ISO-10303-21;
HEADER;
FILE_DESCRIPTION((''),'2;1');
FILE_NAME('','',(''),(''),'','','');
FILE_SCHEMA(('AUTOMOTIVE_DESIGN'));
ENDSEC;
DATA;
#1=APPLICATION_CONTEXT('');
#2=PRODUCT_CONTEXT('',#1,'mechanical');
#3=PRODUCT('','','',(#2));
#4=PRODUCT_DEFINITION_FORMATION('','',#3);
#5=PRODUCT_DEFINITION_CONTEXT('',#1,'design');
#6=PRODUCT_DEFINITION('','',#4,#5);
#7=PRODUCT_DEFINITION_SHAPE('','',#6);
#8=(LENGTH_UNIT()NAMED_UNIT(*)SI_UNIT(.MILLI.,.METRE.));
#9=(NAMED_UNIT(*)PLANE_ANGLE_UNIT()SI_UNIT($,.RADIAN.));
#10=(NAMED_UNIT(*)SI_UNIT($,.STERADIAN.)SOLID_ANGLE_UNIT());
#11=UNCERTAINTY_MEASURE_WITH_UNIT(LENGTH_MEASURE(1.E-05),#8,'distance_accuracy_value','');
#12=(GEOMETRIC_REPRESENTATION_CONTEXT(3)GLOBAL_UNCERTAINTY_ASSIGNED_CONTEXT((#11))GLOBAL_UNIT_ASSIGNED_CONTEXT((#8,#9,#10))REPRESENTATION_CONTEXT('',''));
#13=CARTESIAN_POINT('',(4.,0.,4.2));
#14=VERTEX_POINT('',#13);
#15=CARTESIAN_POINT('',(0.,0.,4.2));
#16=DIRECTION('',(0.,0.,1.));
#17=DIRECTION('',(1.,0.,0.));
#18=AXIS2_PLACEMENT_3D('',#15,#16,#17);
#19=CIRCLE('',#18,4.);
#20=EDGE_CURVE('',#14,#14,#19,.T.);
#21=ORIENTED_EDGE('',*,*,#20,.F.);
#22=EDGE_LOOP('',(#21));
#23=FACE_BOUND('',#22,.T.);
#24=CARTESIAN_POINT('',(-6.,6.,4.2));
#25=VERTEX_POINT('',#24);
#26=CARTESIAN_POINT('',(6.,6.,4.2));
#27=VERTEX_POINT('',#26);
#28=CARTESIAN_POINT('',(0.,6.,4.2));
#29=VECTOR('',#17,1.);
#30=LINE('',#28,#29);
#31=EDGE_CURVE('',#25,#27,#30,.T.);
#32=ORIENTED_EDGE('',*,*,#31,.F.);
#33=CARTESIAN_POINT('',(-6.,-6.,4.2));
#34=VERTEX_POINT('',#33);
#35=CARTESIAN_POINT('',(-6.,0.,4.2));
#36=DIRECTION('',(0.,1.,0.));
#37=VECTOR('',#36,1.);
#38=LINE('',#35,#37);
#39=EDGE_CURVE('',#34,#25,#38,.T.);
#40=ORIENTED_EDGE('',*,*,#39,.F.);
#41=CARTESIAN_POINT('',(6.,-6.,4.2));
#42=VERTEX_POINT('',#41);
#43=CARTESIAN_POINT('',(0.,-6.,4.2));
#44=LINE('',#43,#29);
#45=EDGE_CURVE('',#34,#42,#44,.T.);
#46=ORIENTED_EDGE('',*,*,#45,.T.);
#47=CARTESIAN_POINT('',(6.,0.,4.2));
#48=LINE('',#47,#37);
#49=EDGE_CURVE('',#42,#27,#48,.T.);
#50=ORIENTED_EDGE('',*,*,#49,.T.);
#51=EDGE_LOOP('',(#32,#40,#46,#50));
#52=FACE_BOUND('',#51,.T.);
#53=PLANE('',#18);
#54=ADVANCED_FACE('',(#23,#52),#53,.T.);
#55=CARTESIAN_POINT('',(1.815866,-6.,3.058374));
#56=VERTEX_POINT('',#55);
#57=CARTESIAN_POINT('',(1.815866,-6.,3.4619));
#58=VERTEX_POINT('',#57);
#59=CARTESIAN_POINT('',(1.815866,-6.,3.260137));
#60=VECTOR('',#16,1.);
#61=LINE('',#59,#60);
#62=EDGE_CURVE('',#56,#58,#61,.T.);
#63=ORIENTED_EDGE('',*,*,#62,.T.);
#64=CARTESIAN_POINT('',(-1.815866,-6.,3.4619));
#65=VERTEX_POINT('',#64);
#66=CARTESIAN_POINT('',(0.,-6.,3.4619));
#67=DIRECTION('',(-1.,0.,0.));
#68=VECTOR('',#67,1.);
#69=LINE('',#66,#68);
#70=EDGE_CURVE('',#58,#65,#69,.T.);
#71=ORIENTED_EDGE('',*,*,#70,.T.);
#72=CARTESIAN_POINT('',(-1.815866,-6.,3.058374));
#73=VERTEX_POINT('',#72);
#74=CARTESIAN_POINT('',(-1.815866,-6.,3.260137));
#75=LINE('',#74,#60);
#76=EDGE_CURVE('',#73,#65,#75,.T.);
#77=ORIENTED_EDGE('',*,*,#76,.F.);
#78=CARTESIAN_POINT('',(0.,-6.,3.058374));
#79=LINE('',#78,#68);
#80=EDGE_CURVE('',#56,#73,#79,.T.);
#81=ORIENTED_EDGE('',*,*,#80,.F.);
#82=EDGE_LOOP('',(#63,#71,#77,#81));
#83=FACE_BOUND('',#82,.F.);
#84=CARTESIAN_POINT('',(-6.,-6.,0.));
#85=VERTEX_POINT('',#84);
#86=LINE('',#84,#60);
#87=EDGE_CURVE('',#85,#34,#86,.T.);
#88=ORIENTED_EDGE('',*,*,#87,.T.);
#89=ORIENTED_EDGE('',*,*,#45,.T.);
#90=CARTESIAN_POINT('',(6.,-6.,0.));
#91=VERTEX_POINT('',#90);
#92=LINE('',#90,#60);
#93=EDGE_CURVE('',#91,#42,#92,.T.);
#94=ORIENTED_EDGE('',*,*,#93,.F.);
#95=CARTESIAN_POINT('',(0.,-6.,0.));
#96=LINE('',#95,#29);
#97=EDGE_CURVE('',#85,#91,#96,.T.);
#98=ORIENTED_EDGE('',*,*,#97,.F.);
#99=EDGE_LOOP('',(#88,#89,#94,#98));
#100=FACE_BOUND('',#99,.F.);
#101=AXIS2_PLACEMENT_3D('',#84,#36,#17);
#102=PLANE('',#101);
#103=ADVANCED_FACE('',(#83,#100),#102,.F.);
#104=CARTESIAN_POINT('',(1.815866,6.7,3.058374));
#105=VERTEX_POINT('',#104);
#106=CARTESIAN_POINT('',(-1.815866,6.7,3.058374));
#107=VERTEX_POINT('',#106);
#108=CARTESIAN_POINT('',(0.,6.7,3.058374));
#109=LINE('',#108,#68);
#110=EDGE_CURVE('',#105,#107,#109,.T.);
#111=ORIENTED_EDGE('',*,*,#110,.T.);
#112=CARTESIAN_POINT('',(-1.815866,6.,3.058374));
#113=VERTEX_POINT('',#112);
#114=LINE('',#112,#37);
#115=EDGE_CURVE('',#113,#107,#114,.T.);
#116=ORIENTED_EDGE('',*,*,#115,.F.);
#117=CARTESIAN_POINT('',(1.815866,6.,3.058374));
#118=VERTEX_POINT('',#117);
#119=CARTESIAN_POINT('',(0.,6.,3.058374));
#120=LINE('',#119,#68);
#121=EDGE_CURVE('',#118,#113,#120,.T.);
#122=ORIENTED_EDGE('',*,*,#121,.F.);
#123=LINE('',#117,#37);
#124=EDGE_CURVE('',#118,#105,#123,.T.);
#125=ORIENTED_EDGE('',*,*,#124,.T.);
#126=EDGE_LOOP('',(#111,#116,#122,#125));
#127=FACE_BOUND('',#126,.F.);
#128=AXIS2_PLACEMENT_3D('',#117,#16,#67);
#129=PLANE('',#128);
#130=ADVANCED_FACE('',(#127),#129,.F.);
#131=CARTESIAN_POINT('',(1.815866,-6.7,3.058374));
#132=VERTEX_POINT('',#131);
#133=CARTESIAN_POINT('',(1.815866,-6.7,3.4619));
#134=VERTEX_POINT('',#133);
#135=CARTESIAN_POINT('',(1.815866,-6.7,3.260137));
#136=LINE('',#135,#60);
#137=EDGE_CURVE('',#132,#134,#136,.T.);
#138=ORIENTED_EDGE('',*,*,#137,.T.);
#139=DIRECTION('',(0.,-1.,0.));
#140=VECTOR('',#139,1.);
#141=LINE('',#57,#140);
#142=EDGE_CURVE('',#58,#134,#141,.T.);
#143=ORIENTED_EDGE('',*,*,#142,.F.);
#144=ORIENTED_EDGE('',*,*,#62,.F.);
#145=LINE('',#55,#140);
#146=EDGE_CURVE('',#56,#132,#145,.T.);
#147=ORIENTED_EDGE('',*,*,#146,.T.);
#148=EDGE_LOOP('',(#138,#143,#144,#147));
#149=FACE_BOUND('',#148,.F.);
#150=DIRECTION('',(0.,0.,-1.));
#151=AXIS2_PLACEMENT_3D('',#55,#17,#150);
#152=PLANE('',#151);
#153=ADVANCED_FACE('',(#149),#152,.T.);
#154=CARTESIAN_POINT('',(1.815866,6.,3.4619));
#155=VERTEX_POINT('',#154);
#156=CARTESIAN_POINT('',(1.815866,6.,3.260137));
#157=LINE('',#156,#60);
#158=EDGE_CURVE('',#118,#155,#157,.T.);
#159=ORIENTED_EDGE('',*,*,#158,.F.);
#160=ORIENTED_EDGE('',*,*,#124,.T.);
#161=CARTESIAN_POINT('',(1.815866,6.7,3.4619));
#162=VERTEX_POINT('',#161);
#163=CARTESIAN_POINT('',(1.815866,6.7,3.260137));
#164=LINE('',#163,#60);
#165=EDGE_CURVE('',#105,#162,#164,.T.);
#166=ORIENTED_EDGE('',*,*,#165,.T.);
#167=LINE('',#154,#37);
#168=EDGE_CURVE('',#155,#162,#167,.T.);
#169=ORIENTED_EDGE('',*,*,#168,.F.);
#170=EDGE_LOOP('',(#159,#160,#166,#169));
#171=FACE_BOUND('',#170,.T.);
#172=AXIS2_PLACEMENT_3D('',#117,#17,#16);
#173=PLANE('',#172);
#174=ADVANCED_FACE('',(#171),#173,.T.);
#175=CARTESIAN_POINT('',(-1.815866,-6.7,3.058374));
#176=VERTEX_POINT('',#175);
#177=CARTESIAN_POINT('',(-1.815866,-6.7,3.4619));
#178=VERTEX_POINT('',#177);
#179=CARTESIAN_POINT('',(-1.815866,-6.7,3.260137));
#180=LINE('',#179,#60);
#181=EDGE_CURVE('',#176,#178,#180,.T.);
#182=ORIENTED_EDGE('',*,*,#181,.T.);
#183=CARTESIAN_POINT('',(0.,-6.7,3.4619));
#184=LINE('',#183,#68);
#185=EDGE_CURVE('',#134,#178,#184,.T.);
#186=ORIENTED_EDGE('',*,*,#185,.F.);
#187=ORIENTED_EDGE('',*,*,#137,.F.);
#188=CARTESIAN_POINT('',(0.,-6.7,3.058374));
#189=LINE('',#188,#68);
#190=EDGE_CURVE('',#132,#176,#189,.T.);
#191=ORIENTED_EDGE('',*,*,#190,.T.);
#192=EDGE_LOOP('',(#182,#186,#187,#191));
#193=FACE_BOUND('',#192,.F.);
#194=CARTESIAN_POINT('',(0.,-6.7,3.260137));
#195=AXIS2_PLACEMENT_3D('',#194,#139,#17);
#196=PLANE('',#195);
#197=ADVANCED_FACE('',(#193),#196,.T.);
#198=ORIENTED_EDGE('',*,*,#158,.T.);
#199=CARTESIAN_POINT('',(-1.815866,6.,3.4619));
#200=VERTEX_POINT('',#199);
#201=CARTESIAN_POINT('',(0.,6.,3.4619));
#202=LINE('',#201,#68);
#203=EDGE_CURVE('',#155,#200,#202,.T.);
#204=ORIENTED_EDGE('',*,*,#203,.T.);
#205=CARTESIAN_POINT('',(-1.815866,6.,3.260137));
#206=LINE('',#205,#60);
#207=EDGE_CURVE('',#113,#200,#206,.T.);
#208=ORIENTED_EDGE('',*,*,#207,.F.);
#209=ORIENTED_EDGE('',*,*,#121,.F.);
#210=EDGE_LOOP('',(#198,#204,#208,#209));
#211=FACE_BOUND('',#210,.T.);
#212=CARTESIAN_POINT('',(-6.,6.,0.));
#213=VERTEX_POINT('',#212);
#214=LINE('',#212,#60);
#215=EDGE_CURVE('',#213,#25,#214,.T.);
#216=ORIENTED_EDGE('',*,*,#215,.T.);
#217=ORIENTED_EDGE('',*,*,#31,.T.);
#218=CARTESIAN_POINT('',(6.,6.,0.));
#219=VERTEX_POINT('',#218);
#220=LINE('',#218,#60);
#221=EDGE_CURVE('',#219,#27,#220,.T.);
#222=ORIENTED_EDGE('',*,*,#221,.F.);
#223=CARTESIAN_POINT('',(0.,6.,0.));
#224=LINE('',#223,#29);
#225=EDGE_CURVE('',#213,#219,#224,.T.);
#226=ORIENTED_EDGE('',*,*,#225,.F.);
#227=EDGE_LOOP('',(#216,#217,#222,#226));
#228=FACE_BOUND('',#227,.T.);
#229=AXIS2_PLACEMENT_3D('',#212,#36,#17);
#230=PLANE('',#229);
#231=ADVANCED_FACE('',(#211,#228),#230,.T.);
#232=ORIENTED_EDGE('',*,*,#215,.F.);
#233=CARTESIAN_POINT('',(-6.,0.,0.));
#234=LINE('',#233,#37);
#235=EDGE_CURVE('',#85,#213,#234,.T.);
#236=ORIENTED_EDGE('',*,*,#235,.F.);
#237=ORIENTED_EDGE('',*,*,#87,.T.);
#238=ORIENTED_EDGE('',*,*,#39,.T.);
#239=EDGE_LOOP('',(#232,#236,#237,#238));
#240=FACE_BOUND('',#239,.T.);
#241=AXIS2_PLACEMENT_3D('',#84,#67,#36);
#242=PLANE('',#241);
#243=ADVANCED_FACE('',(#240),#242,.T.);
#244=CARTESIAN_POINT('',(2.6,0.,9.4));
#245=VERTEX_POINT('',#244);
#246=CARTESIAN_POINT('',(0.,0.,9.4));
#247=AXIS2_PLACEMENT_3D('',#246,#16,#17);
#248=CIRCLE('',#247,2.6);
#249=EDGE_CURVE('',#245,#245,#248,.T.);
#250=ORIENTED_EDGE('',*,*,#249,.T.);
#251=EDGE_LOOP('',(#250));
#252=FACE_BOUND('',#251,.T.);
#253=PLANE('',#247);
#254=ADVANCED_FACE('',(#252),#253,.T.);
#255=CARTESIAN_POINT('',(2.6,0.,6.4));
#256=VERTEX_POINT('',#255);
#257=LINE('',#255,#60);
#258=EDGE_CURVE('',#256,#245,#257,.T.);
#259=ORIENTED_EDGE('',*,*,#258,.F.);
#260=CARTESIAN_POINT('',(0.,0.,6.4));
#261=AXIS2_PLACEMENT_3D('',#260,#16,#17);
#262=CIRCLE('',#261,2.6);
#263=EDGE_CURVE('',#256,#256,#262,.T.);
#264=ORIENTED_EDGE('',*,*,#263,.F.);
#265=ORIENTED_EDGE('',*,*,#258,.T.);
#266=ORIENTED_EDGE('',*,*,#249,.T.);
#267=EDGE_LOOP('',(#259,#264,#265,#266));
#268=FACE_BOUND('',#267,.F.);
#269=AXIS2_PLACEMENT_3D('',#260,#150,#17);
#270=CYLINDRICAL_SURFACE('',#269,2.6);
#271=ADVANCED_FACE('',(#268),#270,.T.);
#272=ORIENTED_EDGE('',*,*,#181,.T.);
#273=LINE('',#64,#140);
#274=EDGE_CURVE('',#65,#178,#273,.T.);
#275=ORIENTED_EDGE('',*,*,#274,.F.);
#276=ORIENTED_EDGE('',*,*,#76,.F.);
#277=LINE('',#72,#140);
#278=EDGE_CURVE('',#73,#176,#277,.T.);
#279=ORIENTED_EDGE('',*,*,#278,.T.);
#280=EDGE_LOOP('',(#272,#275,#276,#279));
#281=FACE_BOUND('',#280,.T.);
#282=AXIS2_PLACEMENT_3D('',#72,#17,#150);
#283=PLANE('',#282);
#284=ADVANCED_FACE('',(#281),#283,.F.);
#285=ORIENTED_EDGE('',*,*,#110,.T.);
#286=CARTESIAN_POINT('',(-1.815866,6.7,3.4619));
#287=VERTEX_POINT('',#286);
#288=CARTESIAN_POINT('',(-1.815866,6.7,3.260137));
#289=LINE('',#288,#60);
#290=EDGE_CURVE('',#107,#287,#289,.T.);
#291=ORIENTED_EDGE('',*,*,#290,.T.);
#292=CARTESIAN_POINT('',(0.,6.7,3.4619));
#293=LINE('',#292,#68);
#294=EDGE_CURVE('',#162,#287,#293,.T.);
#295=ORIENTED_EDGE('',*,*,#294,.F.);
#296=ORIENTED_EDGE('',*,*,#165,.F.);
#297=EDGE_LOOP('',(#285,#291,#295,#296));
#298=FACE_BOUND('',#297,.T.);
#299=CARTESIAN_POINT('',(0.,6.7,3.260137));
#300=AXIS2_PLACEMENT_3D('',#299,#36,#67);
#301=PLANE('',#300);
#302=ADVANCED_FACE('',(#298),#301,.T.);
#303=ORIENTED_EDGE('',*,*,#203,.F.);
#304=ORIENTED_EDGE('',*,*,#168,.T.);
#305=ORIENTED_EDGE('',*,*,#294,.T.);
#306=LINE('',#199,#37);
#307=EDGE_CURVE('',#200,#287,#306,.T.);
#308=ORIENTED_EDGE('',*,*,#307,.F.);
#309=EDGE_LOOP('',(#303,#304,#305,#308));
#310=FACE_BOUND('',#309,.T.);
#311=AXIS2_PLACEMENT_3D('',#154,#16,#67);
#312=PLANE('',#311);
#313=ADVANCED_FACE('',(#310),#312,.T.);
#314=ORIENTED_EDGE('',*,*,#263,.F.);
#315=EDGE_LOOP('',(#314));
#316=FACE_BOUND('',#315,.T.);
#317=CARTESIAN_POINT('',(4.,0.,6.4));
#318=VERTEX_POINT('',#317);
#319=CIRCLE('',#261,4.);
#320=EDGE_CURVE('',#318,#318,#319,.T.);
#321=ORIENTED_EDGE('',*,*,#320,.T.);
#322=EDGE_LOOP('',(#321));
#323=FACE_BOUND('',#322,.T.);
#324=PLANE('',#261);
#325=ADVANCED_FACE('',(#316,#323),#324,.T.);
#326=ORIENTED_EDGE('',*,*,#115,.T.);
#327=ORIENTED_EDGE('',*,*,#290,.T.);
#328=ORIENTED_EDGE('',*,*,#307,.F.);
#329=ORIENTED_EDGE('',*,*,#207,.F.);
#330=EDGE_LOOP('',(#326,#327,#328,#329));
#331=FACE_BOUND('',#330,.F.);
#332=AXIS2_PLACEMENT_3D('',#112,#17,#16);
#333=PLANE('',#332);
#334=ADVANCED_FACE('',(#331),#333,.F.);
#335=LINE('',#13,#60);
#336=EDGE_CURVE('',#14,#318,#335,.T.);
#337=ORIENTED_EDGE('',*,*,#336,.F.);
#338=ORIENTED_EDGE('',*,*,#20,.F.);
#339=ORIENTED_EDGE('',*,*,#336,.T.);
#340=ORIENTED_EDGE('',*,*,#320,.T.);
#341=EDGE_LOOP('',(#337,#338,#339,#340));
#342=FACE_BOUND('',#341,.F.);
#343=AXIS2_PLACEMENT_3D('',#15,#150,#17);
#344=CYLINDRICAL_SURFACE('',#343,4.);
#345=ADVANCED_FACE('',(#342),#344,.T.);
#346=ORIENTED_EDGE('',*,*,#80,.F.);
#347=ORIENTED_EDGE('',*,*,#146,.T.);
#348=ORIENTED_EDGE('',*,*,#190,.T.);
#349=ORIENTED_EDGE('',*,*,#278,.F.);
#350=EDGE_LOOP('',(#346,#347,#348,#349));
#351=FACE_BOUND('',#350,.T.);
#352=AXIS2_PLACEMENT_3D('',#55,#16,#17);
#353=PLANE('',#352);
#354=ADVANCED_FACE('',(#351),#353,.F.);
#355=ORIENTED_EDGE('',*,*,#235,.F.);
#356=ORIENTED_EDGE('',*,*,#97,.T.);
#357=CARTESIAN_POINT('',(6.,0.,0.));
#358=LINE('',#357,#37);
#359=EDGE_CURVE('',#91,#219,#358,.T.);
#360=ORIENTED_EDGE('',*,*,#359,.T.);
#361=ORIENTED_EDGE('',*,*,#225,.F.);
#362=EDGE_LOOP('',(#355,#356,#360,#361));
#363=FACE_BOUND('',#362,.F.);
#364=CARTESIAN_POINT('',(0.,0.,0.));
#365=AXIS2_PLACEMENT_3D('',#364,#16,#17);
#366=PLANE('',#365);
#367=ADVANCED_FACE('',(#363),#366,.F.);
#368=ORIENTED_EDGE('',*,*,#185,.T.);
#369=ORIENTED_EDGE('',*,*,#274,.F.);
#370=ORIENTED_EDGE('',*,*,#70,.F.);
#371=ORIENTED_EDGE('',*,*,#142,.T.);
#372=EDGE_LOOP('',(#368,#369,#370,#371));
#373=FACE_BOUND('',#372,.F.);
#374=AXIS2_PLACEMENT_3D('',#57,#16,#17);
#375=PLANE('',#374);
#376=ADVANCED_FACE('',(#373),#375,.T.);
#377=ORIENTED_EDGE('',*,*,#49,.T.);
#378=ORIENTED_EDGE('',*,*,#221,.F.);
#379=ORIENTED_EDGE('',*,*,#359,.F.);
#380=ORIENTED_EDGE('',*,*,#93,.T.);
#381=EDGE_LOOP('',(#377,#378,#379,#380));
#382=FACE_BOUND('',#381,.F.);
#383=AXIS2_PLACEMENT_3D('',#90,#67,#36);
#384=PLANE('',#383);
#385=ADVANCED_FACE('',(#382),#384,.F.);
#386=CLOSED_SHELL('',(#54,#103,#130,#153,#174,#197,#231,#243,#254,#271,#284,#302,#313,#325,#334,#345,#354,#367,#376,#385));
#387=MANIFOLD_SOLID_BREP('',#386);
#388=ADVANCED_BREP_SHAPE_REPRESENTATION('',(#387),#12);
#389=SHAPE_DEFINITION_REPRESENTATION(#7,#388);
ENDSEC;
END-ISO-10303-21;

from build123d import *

# Parameters (mm, degrees)
F0_W     = 12
F0_H     = 12
F1_DEPTH = 4.2
F2_R     = 4
F3_DEPTH = 2.2
F4_R     = 2.6
F5_DEPTH = 3
F6_W     = 3.6317317281
F6_H     = 0.4035253078
F7_DEPTH = 0.7


# Not quite as in the source:
# - a pattern or mirror of a feature is missing from the dataset's text; its kind, count and spacing are read off the source's solid


with BuildPart() as f1:
    # F0 (on Top) → F1 (new body)
    with BuildSketch(Plane.XY):
        Rectangle(F0_W, F0_H)
    extrude(amount=F1_DEPTH)

    # F2 (on face) → F3 (join)
    with BuildSketch(Plane.XY.offset(4.2)):
        Circle(F2_R)
    extrude(amount=F3_DEPTH)

    # F4 (on face) → F5 (join)
    with BuildSketch(Plane.XY.offset(6.4)):
        Circle(F4_R)
    extrude(amount=F5_DEPTH)

    # F6 (on face) → F7 (join)
    with BuildSketch(Plane(origin=(0, 6, 0), x_dir=(-1, 0, 0), z_dir=(0, 1, 0))):
        with Locations((0, 3.2601370476)):
            Rectangle(F6_W, F6_H)
    f7 = extrude(amount=F7_DEPTH)

    # F7_copies: F7 across plane
    add(f7.mirror(Plane(origin=(0, 0, 0), x_dir=(0, 0, -1), z_dir=(0, -1, 0))))


solid = f1.part
